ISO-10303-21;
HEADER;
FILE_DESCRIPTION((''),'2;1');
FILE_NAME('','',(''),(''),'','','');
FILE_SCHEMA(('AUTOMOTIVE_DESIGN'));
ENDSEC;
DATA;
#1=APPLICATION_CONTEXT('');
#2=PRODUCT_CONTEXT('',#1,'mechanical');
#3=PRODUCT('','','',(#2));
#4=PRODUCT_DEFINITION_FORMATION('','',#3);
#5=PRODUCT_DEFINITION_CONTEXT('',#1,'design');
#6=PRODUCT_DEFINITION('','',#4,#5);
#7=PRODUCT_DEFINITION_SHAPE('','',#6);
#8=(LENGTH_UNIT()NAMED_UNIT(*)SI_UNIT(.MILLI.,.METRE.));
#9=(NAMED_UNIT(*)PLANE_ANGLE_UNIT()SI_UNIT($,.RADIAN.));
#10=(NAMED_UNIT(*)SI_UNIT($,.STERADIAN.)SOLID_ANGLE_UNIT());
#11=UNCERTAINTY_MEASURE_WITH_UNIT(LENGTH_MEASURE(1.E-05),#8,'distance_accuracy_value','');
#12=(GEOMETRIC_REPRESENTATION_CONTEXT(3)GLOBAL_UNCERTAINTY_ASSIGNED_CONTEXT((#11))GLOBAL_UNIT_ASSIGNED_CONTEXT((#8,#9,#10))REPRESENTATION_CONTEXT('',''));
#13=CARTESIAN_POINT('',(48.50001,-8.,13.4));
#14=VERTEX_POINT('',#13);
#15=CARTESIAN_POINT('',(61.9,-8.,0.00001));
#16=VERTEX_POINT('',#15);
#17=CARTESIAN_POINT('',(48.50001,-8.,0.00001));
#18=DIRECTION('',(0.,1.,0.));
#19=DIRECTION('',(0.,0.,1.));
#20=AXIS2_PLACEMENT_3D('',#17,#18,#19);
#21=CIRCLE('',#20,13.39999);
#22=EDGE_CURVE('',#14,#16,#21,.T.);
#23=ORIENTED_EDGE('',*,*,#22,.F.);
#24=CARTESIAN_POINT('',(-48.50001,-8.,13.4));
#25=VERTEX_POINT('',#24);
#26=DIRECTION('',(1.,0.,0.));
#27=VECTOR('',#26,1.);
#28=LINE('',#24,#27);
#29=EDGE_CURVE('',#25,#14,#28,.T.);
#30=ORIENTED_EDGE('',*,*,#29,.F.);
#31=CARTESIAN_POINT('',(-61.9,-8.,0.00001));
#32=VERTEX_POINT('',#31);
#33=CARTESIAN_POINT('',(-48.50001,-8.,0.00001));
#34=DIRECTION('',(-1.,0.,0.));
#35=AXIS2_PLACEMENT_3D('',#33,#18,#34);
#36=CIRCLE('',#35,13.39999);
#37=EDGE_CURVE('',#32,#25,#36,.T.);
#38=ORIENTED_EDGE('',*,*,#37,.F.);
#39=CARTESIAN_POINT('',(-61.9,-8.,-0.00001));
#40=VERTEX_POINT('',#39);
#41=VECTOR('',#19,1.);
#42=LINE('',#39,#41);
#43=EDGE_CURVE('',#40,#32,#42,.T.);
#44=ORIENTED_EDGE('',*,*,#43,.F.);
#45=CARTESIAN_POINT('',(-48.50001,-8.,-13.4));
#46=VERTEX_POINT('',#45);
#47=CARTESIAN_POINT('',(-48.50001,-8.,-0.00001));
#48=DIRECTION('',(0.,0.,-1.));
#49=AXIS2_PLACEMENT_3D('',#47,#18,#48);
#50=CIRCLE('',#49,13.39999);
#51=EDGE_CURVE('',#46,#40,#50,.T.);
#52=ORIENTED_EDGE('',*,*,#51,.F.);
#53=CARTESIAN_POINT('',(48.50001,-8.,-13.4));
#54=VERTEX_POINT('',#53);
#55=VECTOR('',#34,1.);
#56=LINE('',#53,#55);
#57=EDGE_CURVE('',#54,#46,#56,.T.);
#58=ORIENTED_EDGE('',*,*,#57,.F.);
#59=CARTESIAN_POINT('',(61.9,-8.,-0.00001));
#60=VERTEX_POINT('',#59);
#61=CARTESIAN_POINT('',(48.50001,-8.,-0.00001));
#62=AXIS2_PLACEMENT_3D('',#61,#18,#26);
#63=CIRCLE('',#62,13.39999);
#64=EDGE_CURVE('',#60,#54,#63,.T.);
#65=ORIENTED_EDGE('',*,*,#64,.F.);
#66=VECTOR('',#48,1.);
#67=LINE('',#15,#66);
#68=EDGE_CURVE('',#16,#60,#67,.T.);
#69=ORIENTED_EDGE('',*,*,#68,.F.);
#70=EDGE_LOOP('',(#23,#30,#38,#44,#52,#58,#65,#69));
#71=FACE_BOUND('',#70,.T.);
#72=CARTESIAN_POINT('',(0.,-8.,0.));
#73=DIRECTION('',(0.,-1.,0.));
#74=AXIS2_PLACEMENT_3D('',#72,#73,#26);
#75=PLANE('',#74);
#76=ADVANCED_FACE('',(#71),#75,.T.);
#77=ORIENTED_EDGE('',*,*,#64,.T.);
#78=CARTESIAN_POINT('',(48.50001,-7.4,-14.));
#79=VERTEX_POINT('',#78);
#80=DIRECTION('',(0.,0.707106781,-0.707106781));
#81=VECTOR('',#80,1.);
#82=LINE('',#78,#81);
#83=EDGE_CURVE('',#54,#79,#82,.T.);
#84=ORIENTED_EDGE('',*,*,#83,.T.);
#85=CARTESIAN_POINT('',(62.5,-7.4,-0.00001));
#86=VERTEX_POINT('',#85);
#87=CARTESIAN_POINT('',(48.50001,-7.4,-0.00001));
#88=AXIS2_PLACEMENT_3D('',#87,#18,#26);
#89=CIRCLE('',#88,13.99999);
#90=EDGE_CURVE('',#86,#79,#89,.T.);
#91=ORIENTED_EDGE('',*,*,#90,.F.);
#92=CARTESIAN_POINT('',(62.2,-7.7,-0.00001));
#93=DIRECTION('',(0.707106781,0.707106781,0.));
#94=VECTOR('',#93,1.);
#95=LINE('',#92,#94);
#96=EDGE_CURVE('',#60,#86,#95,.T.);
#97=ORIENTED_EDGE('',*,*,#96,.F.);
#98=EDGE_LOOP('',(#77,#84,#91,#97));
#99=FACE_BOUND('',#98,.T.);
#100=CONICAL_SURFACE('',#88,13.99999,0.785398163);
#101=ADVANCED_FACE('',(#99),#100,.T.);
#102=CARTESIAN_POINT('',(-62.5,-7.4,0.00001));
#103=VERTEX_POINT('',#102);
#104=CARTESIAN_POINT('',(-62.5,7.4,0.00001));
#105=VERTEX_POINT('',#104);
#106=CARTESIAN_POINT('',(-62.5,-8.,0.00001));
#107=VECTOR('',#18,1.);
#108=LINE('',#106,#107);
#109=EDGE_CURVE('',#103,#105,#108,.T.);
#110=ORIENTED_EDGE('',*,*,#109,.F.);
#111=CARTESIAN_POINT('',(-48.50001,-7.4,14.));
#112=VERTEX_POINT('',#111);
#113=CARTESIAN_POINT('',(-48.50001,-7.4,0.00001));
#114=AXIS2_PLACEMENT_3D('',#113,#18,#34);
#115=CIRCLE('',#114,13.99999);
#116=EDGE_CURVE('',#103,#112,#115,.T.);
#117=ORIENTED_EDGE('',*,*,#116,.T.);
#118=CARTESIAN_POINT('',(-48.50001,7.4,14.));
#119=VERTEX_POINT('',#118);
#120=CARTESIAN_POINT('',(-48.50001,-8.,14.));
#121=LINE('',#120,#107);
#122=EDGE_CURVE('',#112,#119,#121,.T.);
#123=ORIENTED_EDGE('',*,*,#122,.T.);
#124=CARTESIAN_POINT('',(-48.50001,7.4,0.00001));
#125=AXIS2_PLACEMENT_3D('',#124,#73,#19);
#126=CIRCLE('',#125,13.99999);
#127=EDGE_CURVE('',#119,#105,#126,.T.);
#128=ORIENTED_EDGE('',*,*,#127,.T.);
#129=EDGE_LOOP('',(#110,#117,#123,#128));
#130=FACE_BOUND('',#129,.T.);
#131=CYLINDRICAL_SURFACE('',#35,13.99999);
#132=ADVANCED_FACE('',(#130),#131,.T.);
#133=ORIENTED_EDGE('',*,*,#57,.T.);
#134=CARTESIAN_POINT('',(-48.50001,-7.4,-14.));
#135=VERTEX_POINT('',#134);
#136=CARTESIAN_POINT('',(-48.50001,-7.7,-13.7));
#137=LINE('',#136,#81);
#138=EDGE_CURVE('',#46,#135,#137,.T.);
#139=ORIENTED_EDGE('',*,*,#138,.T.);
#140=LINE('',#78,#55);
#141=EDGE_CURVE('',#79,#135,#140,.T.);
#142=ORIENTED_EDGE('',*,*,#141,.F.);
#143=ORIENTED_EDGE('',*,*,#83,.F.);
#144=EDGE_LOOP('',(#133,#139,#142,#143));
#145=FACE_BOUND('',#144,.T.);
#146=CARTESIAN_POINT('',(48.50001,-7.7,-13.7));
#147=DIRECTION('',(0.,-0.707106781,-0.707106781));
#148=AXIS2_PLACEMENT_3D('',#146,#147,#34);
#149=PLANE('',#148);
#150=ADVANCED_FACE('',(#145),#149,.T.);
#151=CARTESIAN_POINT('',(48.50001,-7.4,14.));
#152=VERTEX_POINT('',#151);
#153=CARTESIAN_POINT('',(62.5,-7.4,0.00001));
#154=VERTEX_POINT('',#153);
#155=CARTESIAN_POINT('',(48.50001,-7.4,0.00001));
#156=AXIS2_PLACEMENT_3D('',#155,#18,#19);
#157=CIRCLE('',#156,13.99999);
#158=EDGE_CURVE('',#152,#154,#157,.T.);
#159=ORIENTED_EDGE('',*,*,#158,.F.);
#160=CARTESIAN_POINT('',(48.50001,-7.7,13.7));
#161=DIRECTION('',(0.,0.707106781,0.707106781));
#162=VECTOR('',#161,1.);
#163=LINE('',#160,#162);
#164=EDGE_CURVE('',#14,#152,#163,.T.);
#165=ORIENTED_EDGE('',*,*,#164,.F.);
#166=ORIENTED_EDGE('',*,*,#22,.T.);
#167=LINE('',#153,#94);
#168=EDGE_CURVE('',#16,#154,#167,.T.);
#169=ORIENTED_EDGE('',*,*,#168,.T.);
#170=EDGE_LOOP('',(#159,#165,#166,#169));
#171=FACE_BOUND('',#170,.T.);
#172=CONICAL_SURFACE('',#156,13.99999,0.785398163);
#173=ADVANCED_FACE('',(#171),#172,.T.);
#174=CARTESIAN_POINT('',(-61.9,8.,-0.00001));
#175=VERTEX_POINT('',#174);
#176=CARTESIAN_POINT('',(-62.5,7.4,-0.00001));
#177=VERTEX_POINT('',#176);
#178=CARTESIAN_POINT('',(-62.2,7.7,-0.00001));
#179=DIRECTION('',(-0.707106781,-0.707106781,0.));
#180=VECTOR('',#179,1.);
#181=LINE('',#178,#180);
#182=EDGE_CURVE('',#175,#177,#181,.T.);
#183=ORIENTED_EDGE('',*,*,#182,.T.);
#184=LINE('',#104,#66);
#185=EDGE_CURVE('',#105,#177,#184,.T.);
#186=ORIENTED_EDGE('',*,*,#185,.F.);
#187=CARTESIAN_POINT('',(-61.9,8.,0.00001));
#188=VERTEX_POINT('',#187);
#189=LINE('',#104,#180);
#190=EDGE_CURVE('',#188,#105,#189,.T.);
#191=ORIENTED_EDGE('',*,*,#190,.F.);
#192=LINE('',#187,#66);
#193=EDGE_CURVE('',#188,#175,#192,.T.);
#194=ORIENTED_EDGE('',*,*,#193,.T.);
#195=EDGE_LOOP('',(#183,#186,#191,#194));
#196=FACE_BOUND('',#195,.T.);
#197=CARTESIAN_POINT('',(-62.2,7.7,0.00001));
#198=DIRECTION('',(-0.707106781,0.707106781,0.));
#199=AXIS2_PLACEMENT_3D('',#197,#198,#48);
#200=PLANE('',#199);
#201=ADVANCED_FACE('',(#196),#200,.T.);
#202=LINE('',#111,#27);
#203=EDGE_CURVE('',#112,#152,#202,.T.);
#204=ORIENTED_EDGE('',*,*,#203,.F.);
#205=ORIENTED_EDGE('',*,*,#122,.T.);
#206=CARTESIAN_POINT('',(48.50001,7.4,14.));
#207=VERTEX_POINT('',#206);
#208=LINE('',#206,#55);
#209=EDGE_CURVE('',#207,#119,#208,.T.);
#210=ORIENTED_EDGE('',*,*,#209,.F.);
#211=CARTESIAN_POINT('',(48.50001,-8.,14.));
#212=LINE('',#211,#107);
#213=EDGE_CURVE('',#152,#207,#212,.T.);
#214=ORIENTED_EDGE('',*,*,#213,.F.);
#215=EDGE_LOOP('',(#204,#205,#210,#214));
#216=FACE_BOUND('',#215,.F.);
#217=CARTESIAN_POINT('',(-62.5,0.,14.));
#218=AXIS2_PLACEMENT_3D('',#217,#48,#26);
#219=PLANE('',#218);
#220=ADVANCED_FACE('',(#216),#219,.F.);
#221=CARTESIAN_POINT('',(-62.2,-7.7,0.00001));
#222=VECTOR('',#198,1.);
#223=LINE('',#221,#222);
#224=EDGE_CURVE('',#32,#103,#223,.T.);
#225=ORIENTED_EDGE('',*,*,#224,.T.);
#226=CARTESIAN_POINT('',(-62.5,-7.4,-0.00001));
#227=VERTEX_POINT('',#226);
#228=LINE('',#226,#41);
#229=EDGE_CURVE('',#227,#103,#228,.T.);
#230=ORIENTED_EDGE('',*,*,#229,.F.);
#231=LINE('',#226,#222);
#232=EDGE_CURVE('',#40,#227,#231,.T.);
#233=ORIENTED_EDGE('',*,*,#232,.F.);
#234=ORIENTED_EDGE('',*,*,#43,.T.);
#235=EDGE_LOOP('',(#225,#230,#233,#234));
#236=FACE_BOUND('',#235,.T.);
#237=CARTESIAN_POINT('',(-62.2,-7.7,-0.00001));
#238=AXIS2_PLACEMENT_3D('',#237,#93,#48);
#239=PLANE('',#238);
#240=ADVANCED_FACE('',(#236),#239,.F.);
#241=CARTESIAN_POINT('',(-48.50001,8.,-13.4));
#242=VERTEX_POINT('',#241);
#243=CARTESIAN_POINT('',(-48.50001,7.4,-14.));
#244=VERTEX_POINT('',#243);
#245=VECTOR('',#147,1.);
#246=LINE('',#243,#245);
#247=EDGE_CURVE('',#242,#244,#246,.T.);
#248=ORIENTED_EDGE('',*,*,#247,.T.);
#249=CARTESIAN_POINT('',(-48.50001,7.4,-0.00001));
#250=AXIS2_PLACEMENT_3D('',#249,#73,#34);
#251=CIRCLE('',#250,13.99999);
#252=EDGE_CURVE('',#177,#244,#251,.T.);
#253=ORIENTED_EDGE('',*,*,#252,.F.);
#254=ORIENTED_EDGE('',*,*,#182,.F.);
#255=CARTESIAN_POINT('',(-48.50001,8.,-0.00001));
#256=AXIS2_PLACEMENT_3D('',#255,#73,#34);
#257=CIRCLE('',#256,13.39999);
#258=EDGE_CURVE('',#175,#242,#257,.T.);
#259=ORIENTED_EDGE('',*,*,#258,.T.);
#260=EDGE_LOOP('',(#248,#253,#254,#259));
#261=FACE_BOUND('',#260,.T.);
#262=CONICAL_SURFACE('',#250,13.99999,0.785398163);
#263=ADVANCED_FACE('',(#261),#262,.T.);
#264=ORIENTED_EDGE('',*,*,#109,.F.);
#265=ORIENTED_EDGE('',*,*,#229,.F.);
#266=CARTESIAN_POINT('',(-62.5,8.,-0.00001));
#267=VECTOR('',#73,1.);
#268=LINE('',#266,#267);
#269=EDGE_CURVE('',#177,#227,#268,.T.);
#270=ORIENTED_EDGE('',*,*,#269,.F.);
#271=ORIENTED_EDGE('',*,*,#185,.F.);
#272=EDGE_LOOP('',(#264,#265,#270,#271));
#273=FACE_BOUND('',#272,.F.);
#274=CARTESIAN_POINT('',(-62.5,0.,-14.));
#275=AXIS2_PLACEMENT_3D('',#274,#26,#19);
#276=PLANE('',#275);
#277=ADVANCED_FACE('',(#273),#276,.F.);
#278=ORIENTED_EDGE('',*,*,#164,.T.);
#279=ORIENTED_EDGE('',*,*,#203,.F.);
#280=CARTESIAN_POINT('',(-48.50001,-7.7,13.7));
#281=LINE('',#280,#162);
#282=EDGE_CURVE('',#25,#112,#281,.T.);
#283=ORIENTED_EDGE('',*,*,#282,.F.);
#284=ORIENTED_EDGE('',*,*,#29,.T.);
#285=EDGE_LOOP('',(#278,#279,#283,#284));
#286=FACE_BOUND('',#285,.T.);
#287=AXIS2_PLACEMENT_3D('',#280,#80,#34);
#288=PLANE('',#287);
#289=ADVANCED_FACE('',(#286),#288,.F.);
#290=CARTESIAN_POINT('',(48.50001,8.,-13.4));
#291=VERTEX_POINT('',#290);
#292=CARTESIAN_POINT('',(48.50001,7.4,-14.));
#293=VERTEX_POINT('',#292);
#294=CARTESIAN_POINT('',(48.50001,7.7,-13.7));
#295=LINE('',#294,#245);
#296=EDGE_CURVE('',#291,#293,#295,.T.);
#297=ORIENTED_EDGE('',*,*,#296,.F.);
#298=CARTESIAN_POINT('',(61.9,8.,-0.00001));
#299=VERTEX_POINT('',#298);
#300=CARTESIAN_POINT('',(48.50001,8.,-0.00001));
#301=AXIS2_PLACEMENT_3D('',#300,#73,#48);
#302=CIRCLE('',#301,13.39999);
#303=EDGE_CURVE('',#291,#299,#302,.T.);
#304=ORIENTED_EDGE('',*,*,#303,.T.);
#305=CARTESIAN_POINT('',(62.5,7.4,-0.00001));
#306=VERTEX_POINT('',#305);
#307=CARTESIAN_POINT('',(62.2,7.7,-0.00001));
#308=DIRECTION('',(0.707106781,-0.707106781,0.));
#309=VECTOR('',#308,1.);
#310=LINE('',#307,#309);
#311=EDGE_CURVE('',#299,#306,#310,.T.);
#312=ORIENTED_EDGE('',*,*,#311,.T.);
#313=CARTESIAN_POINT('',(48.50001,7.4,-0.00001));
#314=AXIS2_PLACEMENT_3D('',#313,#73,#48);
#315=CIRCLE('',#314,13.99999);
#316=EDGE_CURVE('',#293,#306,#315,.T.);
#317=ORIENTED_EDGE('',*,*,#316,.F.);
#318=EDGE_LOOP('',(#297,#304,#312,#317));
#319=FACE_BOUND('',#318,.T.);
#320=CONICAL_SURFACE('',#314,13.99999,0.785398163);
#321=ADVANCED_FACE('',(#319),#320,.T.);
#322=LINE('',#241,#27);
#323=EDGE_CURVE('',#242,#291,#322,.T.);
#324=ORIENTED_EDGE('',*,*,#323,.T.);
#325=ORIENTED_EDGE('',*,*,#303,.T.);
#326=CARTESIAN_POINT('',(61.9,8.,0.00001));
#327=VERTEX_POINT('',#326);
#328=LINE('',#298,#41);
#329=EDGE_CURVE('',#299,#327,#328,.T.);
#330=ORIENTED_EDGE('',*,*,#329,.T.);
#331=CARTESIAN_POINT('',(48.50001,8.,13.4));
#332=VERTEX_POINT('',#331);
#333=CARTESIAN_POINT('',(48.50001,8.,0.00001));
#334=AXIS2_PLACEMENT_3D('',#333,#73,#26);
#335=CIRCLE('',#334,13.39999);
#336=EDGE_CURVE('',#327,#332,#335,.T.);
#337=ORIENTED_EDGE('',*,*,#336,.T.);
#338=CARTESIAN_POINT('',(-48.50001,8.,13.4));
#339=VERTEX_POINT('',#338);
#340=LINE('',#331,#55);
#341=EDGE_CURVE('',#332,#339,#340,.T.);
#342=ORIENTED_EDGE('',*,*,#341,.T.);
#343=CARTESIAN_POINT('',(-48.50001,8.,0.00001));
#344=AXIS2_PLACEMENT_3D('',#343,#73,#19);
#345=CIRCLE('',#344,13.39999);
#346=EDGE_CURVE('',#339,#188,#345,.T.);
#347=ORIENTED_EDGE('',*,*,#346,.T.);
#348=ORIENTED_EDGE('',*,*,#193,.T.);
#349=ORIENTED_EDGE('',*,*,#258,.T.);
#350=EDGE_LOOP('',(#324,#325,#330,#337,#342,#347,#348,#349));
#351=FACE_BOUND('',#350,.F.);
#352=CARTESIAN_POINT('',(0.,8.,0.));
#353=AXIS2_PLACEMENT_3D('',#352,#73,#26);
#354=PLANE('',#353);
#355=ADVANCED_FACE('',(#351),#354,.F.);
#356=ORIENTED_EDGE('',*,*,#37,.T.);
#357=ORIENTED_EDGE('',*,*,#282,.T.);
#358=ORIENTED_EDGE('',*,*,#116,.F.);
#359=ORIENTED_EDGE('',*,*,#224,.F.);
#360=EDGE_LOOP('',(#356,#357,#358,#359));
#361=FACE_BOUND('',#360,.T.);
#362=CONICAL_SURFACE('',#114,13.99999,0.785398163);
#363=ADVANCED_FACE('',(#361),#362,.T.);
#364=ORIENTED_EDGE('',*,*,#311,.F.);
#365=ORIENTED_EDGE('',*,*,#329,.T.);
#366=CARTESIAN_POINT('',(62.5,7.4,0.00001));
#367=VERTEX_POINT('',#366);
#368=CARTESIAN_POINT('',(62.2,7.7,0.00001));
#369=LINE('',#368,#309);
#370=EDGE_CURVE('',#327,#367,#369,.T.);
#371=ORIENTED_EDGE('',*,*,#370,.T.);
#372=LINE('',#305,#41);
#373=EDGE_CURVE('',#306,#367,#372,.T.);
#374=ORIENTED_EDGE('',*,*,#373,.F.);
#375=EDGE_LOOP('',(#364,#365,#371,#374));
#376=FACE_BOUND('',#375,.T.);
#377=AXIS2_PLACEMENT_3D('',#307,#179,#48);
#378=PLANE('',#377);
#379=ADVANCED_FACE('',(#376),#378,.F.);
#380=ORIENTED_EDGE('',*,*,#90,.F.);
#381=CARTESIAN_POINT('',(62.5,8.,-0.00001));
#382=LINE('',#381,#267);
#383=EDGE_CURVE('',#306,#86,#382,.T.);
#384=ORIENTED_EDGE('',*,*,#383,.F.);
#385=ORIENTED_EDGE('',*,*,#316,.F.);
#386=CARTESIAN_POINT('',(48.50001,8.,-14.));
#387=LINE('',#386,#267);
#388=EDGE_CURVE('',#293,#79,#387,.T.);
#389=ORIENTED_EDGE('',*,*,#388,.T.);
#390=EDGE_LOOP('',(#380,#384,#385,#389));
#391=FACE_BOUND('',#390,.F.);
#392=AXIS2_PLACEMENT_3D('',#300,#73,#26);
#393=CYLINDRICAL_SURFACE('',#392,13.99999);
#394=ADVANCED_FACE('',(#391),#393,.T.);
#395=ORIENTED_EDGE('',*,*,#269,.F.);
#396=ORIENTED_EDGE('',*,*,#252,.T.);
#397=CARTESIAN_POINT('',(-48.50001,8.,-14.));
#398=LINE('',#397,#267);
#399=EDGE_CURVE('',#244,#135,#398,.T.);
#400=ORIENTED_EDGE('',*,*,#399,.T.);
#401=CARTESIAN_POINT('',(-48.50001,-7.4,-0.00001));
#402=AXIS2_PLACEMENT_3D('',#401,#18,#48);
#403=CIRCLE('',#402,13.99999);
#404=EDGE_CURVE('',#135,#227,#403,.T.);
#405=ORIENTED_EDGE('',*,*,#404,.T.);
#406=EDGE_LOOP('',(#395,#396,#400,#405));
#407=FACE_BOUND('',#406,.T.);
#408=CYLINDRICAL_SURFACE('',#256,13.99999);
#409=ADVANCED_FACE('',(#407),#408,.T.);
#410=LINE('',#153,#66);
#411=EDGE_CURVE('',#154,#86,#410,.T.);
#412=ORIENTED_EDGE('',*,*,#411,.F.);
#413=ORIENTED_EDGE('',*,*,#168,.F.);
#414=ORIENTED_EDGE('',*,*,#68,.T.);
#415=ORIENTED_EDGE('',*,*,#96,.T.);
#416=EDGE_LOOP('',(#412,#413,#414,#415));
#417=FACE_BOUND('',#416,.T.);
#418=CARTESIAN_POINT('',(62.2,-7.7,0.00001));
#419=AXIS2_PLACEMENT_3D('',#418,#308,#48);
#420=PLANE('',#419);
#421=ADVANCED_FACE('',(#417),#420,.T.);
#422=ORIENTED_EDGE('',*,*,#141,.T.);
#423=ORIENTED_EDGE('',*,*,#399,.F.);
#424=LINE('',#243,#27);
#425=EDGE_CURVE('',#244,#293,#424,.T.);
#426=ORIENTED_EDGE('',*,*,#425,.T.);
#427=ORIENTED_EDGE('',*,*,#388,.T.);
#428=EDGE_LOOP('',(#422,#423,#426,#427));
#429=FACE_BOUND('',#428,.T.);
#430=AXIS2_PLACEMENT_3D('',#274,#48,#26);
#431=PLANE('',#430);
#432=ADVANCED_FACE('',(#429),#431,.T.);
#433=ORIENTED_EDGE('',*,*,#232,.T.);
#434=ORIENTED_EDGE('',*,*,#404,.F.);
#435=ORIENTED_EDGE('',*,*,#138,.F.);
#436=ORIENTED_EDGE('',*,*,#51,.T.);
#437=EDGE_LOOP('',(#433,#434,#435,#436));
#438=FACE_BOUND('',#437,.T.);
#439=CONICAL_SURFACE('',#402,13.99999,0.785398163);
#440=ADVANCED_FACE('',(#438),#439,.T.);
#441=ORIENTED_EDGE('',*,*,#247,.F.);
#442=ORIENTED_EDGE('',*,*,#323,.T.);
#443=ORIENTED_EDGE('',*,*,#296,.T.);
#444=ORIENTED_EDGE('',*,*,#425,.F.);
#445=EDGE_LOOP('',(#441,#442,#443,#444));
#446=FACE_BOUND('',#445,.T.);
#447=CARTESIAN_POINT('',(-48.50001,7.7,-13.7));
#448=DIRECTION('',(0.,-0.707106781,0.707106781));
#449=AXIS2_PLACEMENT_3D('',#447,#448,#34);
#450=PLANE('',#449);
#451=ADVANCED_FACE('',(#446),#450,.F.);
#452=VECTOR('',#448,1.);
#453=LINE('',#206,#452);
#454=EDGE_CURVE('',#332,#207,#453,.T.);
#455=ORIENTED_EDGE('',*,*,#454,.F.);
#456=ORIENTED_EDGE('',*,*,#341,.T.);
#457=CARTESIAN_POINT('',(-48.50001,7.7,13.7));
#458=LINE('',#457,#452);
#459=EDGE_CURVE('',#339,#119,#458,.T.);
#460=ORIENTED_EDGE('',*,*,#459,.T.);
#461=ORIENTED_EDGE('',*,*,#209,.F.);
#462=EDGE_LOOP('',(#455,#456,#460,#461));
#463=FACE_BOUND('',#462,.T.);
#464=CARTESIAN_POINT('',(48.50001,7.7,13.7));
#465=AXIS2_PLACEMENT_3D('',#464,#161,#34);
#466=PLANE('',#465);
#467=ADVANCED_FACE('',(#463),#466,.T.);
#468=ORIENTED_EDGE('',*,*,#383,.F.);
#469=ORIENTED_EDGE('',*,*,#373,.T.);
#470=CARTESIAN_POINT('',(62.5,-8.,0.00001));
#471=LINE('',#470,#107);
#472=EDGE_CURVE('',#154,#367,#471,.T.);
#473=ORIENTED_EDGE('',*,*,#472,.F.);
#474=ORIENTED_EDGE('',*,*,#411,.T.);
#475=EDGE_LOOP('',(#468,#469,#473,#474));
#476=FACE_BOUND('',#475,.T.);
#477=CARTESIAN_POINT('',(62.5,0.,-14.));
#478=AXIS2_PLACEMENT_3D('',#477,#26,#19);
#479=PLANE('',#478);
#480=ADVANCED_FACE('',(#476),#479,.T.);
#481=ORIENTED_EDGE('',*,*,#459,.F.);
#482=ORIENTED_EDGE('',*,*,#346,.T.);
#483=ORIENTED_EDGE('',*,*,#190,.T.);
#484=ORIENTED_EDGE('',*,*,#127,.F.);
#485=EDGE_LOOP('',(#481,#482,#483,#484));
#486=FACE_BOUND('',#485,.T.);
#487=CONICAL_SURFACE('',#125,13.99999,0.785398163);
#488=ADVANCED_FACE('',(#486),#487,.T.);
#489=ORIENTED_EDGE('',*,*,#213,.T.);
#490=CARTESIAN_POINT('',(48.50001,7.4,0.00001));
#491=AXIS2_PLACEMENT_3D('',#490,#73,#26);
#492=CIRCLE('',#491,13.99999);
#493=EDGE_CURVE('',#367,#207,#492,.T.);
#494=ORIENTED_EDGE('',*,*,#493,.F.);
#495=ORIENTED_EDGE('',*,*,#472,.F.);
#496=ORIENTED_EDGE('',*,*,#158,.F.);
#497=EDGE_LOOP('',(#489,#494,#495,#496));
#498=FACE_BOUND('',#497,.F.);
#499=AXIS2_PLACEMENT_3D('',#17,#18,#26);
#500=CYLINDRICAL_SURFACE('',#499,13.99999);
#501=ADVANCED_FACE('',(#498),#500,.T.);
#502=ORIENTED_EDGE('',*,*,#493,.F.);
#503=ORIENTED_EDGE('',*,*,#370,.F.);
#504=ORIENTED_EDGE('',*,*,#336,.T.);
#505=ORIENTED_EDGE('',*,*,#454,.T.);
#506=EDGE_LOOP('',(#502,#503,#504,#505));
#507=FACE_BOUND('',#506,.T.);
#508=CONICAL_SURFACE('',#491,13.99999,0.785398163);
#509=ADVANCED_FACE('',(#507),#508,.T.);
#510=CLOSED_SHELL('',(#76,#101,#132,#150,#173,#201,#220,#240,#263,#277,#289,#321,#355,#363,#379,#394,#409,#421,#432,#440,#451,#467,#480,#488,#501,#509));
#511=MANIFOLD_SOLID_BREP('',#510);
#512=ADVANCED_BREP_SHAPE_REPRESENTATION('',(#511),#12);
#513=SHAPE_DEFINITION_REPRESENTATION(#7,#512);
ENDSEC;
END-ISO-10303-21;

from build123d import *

# Parameters (mm, degrees)
F0_W     = 125
F0_H     = 28
F1_DEPTH = 8
F2_R     = 13.99999
F3_SIZE  = 0.6


# Not quite as in the source:
# - a fillet or chamfer is up to 0.001 mm smaller than in the source, because OpenCascade refuses the exact size


with BuildPart() as f1:
    # F0 (on Front) → F1 (new body, symmetric)
    with BuildSketch(Plane.XZ):
        Rectangle(F0_W, F0_H)
    extrude(amount=F1_DEPTH, both=True)

    # F2 (radius 14 in the source; OpenCascade refuses exactly that, so slightly less here)
    f2_edges = [f1.edges().sort_by_distance(p)[0] for p in [
        (62.5, 0, -14),
        (62.5, 0, 14),
        (-62.5, 0, -14),
        (-62.5, 0, 14),
    ]]
    fillet(f2_edges, radius=F2_R)

    # F3
    f3_edges = [f1.edges().sort_by_distance(p)[0] for p in [
        (0, -8, 14),
        (62.5, -8, 0),
        (58.399498, -8, -9.899498),
        (58.399498, -8, 9.899498),
        (0, -8, -14),
        (-58.399498, -8, -9.899498),
        (-58.399498, -8, 9.899498),
        (-62.5, -8, 0),
        (62.5, 8, 0),
        (58.399498, 8, -9.899498),
        (58.399498, 8, 9.899498),
        (0, 8, -14),
        (0, 8, 14),
        (-58.399498, 8, -9.899498),
        (-58.399498, 8, 9.899498),
        (-62.5, 8, 0),
    ]]
    chamfer(f3_edges, length=F3_SIZE)


solid = f1.part
